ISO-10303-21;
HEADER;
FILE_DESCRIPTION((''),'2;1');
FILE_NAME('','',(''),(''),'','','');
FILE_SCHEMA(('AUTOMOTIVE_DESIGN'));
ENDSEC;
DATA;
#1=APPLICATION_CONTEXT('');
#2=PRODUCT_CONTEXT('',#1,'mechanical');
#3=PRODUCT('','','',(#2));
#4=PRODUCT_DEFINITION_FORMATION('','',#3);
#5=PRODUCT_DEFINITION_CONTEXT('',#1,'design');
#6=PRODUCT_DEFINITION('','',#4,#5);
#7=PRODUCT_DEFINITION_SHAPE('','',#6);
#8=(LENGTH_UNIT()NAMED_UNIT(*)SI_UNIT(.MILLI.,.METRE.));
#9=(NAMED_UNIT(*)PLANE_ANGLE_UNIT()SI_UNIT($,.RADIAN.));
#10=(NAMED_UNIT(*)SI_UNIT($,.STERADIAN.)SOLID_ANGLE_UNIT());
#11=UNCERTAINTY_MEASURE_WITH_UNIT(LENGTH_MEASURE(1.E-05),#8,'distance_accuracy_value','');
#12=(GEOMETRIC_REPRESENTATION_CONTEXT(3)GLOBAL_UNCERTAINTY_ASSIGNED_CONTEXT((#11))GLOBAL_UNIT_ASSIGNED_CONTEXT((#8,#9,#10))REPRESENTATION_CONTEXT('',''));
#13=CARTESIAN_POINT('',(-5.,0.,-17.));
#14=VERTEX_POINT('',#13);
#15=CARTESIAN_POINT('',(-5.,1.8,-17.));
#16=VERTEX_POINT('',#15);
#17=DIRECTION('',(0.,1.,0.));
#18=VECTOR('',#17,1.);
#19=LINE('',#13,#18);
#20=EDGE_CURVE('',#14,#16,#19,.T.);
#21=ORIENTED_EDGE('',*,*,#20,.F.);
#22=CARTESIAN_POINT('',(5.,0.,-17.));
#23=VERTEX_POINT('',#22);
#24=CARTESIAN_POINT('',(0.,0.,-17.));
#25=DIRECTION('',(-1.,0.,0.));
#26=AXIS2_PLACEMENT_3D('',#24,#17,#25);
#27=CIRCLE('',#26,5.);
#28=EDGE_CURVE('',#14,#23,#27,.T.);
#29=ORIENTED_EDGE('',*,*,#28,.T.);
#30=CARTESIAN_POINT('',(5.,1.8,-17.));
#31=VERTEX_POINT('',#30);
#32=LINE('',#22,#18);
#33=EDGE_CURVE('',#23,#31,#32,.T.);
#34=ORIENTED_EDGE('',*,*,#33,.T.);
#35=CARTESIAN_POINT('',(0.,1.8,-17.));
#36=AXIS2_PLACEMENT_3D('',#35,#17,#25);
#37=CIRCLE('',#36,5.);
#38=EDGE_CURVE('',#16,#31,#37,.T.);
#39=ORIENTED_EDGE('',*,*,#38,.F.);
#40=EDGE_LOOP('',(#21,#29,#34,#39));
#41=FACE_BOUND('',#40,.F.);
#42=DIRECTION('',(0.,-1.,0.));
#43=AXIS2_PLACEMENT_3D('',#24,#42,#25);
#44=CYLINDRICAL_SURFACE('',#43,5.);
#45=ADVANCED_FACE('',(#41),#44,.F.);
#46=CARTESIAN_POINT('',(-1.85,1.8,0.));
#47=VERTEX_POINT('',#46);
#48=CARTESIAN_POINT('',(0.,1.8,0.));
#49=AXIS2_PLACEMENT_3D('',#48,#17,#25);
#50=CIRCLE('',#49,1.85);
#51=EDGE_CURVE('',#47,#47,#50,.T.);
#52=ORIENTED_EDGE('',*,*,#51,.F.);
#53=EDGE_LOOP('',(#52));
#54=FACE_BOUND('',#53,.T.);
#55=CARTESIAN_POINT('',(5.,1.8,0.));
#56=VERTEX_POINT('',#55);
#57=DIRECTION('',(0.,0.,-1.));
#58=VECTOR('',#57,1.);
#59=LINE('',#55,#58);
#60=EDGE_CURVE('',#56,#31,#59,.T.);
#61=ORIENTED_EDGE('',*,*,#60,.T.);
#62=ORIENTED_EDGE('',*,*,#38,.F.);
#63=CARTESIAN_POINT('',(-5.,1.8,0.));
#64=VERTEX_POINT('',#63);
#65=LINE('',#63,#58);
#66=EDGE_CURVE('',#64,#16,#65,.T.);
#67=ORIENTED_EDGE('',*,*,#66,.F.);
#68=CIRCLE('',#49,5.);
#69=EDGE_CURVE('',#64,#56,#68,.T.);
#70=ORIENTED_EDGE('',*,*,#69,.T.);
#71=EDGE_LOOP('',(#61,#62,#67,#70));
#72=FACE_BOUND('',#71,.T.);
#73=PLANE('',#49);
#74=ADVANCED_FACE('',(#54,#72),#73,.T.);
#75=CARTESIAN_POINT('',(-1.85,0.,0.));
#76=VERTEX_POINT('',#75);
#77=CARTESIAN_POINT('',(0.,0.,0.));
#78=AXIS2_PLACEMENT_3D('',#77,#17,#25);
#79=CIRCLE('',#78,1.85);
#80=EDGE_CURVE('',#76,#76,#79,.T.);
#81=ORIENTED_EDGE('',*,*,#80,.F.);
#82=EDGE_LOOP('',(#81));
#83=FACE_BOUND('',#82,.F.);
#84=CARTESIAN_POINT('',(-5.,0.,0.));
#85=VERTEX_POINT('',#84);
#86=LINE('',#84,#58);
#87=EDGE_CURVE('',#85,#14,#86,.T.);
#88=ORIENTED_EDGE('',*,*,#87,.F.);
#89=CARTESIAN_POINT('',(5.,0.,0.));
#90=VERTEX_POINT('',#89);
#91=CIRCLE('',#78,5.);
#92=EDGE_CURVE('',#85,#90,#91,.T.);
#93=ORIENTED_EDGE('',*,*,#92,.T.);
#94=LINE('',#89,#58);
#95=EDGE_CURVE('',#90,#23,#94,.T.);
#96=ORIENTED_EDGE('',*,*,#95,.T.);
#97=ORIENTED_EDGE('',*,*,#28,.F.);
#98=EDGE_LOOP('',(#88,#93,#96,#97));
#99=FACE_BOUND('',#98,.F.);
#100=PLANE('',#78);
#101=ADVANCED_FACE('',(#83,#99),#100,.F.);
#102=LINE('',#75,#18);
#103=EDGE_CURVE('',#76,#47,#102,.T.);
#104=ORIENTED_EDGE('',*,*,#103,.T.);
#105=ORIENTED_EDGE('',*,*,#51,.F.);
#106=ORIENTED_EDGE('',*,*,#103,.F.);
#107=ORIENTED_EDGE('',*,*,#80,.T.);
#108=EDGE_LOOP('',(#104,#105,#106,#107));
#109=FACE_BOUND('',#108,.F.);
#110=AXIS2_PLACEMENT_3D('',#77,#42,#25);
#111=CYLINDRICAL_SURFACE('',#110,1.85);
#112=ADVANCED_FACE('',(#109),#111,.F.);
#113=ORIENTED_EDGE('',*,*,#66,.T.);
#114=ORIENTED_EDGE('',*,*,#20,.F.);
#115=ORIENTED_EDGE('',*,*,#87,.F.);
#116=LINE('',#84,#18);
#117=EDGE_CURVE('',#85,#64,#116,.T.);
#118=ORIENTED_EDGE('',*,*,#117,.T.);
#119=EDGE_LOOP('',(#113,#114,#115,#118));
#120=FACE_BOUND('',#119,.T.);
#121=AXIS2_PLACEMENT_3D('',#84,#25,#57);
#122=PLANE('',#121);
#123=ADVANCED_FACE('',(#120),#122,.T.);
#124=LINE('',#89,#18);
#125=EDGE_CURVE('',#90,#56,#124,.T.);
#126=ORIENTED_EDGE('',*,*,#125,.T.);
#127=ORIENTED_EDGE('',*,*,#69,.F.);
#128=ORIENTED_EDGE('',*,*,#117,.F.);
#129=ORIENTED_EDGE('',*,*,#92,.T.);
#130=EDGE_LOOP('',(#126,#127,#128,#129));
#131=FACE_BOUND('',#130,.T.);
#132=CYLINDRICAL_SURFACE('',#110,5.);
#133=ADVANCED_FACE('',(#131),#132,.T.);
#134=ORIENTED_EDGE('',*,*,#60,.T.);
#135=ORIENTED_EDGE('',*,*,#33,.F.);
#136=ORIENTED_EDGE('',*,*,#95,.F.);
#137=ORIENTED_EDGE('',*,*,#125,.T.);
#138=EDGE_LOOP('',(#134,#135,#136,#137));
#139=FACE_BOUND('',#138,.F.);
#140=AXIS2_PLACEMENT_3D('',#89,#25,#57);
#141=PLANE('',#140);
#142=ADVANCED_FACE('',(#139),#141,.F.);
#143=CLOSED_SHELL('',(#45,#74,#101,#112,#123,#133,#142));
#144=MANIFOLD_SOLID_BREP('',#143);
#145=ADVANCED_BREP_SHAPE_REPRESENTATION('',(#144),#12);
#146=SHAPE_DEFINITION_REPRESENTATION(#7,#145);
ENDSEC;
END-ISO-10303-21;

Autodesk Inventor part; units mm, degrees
ref_plane "YZ Plane" through (0, 0, 0) normal (1, 0, 0) x (0, 1, 0)
ref_plane "XZ Plane" through (0, 0, 0) normal (0, 1, 0) x (-1, 0, 0)
ref_plane "XY Plane" through (0, 0, 0) normal (0, 0, 1) x (1, 0, 0)
sketch "Skizze1" plane through (0, 0, 0) normal (0, 1, 0) x (-1, 0, 0)
  circle A0 centre (0, 0) radius 1.85
  circle A1 centre (0, 0) radius 5
  line L0 (0, 0) -> (0, -12) construction
  arc A2 (5, -17) -> (-5, -17) centre (0, -17) ccw
  line L1 (5, 0) -> (5, -17)
  line L2 (-5, 0) -> (-5, -17)
  dimension "d0" = 3.7
  dimension "d1" = 10
extrude "Extrusion1" add sketch "Skizze1" along normal blind 1.8
properties part number "chain_elmt_1"
